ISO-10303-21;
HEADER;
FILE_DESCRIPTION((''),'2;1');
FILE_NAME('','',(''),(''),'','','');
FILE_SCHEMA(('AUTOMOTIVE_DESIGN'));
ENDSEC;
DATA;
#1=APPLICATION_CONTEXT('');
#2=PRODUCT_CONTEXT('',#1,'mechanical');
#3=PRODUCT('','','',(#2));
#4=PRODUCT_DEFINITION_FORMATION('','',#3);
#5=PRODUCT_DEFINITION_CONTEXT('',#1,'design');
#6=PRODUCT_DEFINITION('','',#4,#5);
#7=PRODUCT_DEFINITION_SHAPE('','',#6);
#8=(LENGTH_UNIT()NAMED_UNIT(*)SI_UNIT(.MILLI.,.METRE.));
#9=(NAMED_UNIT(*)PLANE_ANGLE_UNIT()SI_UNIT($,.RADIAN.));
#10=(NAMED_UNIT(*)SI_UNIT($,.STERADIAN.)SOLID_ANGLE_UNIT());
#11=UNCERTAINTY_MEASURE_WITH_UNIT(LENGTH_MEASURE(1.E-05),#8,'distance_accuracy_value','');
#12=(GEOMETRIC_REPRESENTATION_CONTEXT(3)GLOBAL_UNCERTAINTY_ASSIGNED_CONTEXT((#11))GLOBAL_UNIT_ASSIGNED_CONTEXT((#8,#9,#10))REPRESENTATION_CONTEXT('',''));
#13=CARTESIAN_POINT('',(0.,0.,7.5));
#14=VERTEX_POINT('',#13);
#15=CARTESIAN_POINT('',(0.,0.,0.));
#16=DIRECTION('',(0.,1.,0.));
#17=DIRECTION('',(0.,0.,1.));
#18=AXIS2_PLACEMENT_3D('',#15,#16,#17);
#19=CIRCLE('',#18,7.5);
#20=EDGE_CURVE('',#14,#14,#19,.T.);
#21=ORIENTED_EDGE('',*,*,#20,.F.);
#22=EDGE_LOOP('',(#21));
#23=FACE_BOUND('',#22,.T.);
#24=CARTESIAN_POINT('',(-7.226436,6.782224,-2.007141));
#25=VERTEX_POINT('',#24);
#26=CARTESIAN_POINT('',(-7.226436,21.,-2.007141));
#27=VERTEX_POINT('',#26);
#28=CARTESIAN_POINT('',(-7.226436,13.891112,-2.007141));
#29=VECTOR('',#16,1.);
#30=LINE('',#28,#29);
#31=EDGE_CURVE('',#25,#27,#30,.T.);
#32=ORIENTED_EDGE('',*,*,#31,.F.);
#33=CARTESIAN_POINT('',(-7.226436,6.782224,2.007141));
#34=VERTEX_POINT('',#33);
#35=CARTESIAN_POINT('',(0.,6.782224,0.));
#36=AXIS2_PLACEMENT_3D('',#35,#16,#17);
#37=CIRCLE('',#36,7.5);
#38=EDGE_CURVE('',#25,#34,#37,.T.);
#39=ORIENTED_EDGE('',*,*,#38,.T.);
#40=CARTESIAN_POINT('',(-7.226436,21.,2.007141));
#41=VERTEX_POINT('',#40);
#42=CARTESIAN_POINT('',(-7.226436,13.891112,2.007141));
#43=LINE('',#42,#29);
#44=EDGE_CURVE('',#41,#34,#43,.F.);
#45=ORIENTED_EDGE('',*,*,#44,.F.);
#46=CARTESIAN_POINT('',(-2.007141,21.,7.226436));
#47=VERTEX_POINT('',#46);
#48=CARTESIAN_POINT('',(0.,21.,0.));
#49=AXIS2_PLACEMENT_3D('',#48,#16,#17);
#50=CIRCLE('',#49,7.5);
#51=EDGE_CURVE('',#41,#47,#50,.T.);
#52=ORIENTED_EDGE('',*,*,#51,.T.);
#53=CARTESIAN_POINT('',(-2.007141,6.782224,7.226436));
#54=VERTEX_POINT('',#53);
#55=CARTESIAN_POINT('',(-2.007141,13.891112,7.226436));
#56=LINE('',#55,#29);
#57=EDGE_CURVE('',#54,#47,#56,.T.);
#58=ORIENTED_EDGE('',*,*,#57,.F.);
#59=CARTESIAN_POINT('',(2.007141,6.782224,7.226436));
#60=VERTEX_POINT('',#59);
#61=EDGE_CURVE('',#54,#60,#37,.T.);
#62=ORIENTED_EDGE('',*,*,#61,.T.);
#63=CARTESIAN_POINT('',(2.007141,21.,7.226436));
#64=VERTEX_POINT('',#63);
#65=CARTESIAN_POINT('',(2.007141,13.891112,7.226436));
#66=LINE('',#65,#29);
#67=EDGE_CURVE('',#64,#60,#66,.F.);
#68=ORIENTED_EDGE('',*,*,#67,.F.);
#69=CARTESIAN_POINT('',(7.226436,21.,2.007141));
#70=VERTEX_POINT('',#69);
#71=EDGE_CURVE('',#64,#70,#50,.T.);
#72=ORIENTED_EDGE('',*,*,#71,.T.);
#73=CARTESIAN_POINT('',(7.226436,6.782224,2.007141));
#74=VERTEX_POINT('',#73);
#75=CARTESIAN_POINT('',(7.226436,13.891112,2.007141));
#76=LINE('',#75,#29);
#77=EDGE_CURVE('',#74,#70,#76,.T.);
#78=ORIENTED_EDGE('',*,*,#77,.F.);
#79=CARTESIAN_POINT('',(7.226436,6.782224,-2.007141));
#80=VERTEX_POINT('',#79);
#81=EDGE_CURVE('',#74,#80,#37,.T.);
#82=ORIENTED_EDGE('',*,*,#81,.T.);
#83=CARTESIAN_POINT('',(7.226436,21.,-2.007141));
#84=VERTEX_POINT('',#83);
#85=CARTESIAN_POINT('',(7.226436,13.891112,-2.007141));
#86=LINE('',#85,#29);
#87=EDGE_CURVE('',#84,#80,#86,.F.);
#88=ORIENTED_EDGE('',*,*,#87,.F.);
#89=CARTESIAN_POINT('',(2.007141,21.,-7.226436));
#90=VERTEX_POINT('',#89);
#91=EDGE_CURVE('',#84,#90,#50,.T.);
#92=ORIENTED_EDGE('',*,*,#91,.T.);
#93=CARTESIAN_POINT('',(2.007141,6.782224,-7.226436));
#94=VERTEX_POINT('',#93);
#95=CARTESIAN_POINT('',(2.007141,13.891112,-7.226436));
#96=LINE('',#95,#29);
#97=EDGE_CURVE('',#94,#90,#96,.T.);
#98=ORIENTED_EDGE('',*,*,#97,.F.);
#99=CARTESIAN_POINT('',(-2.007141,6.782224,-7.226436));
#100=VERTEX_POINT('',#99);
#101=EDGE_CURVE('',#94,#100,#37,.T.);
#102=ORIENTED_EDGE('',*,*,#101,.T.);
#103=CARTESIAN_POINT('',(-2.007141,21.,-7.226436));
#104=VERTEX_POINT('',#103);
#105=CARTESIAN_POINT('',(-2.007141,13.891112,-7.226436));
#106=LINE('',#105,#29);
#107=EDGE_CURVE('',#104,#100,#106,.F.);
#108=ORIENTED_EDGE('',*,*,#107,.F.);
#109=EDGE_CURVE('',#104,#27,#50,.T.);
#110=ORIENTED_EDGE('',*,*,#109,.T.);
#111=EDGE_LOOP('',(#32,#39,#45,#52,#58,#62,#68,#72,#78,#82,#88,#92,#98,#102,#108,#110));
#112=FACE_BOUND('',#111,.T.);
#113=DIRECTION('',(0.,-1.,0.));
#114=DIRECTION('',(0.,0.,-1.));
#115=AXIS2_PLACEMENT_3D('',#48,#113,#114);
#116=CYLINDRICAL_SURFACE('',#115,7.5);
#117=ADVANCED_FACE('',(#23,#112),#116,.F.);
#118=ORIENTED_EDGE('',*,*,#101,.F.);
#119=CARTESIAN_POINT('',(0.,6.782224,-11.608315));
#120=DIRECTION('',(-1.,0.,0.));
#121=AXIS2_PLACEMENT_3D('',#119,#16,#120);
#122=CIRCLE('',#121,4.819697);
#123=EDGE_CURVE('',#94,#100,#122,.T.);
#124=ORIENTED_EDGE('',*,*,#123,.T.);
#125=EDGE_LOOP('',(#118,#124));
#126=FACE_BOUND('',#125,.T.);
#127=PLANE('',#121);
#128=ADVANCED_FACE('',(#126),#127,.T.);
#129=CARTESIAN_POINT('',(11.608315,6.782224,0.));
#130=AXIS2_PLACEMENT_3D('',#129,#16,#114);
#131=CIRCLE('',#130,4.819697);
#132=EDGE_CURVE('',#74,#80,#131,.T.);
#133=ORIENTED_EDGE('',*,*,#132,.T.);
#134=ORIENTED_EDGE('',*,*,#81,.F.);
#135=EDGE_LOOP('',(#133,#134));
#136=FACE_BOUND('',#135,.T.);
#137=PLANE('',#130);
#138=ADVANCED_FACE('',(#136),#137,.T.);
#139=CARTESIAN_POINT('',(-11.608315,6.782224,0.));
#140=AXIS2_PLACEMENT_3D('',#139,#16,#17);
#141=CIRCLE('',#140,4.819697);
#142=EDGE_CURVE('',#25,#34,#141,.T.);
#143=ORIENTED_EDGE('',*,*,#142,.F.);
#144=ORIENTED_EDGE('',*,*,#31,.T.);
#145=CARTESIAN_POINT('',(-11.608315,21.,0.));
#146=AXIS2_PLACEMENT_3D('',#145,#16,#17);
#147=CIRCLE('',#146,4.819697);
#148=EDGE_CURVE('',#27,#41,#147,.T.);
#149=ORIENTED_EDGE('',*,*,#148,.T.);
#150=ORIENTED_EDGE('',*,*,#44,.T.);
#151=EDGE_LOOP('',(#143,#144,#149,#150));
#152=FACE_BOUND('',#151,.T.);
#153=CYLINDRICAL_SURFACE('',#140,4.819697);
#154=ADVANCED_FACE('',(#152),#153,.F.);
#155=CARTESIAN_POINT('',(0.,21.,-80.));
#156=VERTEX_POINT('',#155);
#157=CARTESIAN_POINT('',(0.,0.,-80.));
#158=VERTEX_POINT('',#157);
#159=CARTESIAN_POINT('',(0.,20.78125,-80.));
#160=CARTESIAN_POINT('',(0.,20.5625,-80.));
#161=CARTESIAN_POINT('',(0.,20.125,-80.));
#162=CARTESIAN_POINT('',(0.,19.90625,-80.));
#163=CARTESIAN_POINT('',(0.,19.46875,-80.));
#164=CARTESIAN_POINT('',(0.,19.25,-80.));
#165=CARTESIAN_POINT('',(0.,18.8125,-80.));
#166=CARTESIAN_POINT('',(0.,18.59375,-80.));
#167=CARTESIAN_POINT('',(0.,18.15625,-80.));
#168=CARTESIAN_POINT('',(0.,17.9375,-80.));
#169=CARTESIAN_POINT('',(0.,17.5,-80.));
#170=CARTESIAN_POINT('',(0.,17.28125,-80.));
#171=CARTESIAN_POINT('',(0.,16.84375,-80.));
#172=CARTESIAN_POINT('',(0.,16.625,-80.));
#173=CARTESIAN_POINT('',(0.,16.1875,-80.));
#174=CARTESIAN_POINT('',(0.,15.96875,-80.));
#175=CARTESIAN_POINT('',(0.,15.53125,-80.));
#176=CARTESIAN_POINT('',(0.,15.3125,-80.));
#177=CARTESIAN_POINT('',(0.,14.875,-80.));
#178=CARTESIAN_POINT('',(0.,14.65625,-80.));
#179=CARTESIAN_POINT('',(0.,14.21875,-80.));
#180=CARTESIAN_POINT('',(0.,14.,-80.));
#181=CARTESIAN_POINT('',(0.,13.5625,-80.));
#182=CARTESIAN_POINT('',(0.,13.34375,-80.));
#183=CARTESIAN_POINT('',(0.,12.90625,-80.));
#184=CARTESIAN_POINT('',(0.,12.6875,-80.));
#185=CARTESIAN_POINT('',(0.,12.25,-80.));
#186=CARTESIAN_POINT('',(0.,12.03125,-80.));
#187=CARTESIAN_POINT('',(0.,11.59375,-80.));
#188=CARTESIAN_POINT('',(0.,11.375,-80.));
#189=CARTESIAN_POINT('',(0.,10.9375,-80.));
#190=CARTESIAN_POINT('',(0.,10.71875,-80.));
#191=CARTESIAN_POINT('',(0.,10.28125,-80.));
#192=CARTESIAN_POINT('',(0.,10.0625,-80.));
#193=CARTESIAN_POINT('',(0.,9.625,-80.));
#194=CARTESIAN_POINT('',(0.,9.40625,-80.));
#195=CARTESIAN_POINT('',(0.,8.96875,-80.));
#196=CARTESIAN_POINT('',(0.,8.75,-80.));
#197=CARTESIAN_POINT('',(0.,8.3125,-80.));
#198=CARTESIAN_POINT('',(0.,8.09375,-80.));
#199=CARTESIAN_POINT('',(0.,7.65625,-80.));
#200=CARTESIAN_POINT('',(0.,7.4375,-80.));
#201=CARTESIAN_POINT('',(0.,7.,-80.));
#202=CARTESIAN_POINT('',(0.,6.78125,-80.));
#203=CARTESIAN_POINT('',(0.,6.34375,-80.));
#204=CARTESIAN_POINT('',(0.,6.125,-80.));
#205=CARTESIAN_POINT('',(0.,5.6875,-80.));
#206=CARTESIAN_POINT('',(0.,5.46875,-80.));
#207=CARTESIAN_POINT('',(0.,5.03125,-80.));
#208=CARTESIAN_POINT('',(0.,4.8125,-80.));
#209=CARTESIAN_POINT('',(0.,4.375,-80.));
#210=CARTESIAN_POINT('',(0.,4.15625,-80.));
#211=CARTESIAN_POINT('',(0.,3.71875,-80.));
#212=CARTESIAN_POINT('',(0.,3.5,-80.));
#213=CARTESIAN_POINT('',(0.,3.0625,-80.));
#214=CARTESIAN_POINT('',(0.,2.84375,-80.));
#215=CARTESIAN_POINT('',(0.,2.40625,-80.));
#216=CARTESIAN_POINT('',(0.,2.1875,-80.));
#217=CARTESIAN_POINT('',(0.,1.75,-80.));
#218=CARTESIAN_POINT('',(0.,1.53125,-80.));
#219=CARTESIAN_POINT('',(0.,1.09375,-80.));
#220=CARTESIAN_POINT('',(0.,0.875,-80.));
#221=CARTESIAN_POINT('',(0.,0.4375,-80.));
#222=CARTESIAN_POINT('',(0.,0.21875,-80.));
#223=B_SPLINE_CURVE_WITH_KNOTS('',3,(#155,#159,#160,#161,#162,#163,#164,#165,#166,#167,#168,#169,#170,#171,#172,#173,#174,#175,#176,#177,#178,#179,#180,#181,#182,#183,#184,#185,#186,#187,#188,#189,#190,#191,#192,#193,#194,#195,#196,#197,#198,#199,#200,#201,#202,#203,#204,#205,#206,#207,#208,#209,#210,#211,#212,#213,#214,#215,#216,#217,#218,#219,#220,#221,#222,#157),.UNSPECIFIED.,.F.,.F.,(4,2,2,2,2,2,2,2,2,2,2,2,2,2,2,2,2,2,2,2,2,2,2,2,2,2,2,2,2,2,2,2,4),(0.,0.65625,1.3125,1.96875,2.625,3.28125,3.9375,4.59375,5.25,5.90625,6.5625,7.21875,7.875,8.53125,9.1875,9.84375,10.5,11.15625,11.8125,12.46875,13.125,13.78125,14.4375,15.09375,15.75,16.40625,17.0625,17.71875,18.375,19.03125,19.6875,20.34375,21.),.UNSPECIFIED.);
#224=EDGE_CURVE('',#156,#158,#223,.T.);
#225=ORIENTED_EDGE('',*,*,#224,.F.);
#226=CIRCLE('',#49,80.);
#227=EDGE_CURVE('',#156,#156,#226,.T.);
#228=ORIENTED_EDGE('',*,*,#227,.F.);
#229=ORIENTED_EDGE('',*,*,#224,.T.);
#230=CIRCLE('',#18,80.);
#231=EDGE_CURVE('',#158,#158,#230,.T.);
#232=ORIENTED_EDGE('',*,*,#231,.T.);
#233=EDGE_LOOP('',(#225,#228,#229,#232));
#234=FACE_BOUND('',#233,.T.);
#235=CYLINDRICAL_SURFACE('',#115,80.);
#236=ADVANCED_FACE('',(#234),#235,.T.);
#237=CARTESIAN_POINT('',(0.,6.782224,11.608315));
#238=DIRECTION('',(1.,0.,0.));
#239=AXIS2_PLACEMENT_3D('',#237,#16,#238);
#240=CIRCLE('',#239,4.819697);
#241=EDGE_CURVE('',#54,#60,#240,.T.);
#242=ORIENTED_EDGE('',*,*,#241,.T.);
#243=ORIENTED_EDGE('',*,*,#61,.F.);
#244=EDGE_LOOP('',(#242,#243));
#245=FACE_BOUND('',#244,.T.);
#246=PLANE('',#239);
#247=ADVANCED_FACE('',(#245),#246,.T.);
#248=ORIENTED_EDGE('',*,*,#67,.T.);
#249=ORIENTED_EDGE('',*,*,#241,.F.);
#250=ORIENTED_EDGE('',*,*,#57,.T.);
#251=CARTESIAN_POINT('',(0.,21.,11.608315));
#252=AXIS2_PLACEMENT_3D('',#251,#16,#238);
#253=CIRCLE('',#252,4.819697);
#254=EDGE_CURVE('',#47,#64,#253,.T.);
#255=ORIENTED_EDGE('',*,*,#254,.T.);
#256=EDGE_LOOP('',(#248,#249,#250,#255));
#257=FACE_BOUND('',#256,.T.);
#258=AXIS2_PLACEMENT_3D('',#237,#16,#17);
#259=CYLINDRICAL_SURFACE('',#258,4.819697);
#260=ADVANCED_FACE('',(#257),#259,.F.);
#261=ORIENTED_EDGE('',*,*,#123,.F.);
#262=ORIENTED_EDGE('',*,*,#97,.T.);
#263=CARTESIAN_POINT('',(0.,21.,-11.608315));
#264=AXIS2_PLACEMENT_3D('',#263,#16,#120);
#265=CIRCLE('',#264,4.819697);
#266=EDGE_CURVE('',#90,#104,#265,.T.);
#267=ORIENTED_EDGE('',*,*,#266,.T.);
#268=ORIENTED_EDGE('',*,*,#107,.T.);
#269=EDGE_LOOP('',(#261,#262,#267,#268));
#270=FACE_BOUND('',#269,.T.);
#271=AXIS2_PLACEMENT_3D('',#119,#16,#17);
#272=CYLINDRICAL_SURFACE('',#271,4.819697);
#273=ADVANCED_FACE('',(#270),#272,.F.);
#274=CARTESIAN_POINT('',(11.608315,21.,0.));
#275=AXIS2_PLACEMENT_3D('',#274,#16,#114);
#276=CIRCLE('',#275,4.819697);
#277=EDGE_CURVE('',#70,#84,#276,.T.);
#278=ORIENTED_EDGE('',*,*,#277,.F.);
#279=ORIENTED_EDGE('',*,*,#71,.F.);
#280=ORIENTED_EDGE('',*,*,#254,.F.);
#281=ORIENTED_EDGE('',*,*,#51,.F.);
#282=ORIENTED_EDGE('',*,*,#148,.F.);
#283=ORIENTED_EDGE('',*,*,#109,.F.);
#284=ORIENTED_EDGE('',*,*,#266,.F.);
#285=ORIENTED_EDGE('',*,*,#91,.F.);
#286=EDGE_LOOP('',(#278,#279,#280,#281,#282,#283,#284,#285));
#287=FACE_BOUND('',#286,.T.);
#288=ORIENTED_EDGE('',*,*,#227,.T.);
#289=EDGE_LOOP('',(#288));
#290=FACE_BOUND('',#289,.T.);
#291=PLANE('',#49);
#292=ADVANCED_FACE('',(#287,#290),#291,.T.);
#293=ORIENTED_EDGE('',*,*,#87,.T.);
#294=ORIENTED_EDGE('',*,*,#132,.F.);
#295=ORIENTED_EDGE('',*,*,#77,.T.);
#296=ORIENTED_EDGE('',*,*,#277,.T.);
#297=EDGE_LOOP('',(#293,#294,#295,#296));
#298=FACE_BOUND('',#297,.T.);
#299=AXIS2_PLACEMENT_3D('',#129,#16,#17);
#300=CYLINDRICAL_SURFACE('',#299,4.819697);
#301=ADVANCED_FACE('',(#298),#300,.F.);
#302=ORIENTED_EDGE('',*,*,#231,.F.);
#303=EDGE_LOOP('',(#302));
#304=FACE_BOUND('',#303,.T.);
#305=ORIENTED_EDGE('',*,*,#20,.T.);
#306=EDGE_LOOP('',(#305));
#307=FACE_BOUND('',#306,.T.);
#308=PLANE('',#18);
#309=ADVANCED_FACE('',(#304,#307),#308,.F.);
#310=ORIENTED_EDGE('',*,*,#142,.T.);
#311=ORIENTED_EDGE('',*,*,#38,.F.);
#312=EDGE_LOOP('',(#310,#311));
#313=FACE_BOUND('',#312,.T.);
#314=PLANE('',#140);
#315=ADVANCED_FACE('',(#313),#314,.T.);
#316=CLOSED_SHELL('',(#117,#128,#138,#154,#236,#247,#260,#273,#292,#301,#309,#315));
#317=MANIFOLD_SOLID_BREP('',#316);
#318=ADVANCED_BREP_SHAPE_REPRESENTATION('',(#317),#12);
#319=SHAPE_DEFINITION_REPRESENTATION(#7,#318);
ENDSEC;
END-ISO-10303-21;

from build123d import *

# Parameters (mm, degrees)
SKETCH1_R           = 80
BOSS_EXTRUDE1_DEPTH = 21
SKETCH2_R           = 7.5
CUT_EXTRUDE1_DEPTH  = 116.06954419
SKETCH3_R           = 4.819696682
CUT_EXTRUDE2_DEPTH  = 14.217775867
CIRPATTERN1_COUNT   = 4


with BuildPart() as part:
    # Sketch1 → Boss-Extrude1 (new body)
    with BuildSketch(Plane(origin=(0, 0, 0), x_dir=(1, 0, 0), z_dir=(0, 1, 0))):
        Circle(SKETCH1_R)
    extrude(amount=BOSS_EXTRUDE1_DEPTH)

    # Sketch2 → Cut-Extrude1 (cut, through all)
    with BuildSketch(Plane(origin=(0, 0, 0), x_dir=(1, 0, 0), z_dir=(0, 1, 0))):
        Circle(SKETCH2_R)
    extrude(amount=CUT_EXTRUDE1_DEPTH, mode=Mode.SUBTRACT)

    # Sketch3 → Cut-Extrude2 (cut)
    with BuildSketch(Plane(origin=(0, 21, 0), x_dir=(1, 0, 0), z_dir=(0, 1, 0))):
        with Locations((-11.608315107, 0)):
            Circle(SKETCH3_R)
    cut_extrude2 = extrude(amount=-CUT_EXTRUDE2_DEPTH, mode=Mode.SUBTRACT)

    # CirPattern1: Cut-Extrude2 ×4 about axis
    cirpattern1_axis = Axis((0, 0, 0), (0, 1, 0))
    for i in range(1, CIRPATTERN1_COUNT):
        add(cut_extrude2.rotate(cirpattern1_axis, i * 360 / CIRPATTERN1_COUNT), mode=Mode.SUBTRACT)


solid = part.part
